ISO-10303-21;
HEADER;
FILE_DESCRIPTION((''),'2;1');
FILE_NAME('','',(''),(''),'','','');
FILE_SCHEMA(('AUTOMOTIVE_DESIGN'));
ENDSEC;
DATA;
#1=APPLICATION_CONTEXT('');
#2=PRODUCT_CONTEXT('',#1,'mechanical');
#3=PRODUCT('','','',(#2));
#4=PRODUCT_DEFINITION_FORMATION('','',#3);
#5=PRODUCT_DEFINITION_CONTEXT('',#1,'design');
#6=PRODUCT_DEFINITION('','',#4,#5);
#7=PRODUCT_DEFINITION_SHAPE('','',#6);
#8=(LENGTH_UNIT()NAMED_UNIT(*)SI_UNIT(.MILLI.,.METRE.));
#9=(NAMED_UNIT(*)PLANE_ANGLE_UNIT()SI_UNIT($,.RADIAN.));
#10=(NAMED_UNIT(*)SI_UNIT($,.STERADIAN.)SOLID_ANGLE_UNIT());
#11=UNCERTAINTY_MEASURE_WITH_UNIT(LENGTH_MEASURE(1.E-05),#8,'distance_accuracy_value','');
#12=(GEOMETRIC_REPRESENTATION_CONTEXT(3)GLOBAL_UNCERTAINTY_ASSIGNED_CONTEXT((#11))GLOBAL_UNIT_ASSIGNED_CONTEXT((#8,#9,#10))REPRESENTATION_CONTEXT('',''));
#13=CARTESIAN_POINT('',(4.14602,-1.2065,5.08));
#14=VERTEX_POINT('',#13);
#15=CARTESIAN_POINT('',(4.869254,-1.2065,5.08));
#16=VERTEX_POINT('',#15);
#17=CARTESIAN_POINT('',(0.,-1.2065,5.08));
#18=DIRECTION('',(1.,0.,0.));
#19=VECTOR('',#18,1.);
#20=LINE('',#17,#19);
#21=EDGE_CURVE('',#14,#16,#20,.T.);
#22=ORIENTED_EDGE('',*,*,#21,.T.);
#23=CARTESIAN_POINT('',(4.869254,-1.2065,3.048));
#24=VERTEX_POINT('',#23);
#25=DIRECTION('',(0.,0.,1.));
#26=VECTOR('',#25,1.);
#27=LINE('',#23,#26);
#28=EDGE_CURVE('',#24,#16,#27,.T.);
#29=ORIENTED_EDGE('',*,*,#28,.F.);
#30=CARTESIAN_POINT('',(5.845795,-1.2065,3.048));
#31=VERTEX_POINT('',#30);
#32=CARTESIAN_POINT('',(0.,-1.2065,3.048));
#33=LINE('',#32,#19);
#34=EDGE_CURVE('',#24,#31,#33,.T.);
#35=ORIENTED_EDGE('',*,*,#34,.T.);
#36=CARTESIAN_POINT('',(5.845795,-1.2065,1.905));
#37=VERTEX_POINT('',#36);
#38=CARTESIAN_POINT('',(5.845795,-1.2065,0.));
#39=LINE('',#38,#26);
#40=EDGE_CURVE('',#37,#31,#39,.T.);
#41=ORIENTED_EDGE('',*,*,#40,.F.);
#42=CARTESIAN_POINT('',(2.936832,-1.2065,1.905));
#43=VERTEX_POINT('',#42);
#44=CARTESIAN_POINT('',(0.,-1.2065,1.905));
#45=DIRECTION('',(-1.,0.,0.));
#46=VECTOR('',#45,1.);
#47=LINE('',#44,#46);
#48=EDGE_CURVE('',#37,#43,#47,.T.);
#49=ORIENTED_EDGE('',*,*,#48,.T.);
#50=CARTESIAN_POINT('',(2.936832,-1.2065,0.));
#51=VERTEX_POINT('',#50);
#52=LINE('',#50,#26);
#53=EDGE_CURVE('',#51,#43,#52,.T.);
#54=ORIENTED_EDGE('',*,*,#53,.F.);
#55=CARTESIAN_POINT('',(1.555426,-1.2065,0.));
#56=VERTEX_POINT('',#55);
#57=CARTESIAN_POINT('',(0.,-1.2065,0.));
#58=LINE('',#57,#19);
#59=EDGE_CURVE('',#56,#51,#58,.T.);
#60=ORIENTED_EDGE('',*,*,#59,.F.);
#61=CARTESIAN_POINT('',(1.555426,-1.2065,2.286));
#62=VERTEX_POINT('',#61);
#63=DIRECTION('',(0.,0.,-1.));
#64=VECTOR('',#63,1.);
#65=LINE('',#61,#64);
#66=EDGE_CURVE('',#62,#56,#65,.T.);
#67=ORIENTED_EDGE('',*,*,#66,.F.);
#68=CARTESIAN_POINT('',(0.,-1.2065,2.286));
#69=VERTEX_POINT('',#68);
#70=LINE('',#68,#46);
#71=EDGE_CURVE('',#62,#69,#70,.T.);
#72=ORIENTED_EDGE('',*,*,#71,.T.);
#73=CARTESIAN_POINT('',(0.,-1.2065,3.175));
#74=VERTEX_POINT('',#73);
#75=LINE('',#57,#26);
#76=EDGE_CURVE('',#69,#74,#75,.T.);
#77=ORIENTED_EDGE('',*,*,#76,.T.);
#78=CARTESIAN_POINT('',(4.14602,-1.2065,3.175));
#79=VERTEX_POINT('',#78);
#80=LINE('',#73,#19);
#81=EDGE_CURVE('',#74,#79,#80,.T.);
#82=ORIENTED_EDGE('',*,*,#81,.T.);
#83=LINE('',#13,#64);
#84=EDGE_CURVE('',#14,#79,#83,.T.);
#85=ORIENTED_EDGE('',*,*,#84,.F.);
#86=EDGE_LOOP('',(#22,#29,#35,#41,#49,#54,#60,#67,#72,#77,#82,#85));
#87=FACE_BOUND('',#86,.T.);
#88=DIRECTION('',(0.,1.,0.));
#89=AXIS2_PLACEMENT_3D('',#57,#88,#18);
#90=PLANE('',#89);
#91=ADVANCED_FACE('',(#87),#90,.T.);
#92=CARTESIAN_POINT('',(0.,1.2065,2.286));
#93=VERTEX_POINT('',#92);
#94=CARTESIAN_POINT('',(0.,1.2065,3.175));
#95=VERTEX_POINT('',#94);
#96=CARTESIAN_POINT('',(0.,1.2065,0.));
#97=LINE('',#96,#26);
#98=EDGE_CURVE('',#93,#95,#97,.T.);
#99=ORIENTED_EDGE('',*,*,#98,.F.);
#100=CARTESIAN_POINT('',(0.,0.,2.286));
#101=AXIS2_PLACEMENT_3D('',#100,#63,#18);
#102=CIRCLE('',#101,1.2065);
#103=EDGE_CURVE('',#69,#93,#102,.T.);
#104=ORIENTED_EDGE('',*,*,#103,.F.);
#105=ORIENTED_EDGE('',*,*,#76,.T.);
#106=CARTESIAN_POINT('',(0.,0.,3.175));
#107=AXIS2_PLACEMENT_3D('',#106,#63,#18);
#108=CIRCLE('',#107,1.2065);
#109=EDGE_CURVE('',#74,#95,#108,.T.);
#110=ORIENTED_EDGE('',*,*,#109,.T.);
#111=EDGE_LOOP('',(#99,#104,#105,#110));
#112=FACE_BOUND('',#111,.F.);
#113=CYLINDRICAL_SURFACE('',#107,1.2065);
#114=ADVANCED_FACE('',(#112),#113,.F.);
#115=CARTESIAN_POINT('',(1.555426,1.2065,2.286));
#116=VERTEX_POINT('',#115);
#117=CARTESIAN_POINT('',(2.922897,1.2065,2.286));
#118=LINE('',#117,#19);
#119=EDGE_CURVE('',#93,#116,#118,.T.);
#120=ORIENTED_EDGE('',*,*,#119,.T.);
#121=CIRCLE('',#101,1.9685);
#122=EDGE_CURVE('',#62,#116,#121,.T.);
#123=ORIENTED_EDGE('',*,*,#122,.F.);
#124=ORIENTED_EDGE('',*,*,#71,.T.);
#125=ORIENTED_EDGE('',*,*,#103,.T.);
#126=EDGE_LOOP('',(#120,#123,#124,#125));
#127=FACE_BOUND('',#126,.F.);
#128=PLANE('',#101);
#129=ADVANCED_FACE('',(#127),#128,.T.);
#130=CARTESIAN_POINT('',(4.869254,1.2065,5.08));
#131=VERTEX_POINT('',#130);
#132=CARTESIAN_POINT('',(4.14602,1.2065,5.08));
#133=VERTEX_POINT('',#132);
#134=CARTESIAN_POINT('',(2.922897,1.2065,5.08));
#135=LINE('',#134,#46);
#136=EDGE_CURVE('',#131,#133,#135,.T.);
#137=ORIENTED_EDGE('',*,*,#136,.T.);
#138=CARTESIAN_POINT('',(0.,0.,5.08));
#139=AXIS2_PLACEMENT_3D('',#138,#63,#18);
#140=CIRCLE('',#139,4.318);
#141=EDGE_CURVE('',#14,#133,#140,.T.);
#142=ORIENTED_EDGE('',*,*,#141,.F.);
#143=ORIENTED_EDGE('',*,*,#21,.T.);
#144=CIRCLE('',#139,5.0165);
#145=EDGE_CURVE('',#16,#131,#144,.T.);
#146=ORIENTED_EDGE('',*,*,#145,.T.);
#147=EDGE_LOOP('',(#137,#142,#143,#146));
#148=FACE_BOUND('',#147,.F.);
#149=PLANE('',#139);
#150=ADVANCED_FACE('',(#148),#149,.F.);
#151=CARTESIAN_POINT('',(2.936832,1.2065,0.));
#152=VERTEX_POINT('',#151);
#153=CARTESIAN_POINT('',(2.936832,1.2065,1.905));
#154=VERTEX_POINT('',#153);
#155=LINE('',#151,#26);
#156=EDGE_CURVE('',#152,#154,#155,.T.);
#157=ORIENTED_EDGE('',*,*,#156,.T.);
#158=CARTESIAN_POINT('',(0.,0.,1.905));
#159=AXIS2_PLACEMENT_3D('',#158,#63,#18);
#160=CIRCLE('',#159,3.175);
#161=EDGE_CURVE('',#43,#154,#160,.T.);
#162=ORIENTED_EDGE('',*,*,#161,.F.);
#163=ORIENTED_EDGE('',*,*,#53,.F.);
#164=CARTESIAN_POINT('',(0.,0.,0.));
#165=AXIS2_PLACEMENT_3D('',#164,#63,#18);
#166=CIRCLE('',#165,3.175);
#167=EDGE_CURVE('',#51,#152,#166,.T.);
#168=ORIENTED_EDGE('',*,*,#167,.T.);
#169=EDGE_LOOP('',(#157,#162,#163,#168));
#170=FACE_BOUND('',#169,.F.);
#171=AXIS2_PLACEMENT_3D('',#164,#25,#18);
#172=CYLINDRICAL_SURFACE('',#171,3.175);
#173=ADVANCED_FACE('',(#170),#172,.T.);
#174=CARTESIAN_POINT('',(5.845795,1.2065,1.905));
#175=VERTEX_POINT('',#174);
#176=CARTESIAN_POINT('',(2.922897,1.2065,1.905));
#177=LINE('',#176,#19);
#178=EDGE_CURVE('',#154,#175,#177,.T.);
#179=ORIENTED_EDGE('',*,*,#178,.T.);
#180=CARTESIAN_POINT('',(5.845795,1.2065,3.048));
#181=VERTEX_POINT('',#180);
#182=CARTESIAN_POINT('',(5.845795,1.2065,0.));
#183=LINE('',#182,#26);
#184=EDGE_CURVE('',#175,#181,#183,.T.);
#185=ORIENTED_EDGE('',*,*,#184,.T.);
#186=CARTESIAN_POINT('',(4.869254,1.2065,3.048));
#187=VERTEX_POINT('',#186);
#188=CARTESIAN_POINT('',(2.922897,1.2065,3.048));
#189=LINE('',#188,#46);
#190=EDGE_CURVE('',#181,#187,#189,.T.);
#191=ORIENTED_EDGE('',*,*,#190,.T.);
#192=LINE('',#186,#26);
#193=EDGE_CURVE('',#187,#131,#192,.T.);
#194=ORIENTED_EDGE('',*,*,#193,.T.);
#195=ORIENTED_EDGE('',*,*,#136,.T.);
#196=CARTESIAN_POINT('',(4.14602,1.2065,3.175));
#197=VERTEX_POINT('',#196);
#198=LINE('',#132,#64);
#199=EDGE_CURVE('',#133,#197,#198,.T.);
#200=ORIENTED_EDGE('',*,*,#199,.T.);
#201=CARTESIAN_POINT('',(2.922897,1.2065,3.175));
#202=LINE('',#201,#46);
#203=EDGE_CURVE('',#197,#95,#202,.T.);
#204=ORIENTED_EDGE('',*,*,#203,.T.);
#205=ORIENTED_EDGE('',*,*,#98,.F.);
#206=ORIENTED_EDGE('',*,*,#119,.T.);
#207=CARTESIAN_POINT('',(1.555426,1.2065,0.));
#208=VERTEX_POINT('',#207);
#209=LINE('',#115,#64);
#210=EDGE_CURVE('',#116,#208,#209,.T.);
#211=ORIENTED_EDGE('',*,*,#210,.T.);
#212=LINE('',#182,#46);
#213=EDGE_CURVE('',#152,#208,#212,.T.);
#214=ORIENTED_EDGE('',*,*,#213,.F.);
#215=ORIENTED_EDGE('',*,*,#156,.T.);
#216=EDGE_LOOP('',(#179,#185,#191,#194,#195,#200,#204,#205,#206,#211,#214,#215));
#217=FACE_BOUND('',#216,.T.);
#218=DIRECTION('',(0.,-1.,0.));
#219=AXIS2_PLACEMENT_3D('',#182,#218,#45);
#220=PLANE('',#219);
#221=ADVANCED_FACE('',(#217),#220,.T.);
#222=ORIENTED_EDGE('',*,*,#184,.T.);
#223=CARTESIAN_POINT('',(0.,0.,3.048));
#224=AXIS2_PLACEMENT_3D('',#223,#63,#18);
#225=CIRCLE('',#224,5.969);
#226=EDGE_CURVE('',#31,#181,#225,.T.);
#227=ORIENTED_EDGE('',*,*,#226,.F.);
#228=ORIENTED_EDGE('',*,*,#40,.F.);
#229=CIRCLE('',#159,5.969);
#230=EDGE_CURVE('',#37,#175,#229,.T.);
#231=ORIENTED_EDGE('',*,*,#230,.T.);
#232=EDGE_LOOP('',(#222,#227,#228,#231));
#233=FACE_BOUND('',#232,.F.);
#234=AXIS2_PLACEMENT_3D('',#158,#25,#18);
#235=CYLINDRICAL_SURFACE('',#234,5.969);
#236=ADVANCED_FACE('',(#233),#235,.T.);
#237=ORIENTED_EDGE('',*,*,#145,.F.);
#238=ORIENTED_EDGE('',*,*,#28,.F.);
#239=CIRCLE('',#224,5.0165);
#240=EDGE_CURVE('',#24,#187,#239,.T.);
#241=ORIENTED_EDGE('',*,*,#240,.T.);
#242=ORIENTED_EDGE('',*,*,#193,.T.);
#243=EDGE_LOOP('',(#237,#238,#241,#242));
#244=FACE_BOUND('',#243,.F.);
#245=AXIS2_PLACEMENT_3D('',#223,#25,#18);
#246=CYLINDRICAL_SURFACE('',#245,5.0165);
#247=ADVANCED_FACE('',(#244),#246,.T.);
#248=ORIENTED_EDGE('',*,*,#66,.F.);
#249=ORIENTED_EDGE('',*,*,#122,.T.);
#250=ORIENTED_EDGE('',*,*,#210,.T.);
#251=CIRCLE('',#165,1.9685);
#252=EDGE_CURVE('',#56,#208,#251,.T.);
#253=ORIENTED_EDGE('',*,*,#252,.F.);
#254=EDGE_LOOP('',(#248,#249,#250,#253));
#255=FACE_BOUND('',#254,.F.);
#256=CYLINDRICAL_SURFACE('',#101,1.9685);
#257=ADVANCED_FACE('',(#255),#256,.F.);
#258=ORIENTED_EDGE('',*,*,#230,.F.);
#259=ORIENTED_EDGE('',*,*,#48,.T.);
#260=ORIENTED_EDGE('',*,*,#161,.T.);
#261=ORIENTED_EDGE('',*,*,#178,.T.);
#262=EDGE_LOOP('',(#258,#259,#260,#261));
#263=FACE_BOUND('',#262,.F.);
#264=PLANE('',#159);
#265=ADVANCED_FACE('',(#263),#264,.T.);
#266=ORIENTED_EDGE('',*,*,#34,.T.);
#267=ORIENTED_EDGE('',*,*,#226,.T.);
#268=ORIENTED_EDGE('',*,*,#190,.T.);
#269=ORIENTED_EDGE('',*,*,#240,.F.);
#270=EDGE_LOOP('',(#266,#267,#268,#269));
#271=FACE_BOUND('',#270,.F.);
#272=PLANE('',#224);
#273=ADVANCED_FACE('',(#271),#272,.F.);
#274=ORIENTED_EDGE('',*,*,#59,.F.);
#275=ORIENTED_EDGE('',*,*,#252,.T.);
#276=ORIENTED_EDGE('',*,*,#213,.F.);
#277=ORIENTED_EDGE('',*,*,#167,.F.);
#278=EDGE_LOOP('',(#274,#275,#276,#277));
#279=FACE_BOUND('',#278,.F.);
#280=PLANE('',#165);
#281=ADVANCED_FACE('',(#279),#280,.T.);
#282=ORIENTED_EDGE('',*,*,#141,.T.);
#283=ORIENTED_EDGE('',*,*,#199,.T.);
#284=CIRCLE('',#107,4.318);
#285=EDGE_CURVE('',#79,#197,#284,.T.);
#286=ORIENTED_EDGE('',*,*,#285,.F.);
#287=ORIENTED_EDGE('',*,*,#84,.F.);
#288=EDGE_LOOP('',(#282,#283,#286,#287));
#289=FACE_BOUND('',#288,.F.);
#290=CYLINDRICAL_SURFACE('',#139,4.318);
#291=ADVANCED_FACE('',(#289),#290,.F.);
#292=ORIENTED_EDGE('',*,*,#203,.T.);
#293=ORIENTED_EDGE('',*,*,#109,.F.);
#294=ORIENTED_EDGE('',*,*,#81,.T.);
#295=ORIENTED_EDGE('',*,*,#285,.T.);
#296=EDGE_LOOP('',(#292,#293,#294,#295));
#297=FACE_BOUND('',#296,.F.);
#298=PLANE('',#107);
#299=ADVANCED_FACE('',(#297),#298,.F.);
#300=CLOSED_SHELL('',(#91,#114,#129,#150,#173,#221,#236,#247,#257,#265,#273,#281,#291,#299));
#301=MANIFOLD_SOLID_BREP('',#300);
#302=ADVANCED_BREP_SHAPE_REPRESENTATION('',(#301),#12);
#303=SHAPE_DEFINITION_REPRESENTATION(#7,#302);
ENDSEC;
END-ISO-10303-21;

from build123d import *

# Parameters (mm, degrees)
F3_DEPTH      = 21
F3_DEPTH_BACK = 5.081


# Not quite as in the source:
# - an extrude ends at something that could not be found from the text; its depth is read off the source's solid


with BuildPart() as f1:
    # F0 (on Front) → F1 (revolve)
    with BuildSketch(Plane.XZ):
        Polygon((1.9685, 2.286), (1.9685, 0), (3.175, 0), (3.175, 1.905), (5.969, 1.905), (5.969, 3.048), (5.0165, 3.048), (5.0165, 5.08), (4.318, 5.08), (4.318, 3.175), (1.2065, 3.175), (1.2065, 2.286), align=None)
    revolve(axis=Axis((0, 0, 1.6013546669), (0, 0, -1)))

    # F2 (on Top) → F3 (cut, two sides)
    with BuildSketch(Plane.XY) as f3_sk:
        with BuildLine():
            Line((5.845794963, 1.2065), (0, 1.2065))
            ThreePointArc((0, 1.2065), (-1.2065, 0), (0, -1.2065))
            Line((0, -1.2065), (5.845794963, -1.2065))
            ThreePointArc((5.845794963, -1.2065), (5.969, 0), (5.845794963, 1.2065))
        make_face()
    extrude(amount=-F3_DEPTH, mode=Mode.SUBTRACT)
    extrude(f3_sk.sketch, amount=F3_DEPTH_BACK, mode=Mode.SUBTRACT)


solid = f1.part
